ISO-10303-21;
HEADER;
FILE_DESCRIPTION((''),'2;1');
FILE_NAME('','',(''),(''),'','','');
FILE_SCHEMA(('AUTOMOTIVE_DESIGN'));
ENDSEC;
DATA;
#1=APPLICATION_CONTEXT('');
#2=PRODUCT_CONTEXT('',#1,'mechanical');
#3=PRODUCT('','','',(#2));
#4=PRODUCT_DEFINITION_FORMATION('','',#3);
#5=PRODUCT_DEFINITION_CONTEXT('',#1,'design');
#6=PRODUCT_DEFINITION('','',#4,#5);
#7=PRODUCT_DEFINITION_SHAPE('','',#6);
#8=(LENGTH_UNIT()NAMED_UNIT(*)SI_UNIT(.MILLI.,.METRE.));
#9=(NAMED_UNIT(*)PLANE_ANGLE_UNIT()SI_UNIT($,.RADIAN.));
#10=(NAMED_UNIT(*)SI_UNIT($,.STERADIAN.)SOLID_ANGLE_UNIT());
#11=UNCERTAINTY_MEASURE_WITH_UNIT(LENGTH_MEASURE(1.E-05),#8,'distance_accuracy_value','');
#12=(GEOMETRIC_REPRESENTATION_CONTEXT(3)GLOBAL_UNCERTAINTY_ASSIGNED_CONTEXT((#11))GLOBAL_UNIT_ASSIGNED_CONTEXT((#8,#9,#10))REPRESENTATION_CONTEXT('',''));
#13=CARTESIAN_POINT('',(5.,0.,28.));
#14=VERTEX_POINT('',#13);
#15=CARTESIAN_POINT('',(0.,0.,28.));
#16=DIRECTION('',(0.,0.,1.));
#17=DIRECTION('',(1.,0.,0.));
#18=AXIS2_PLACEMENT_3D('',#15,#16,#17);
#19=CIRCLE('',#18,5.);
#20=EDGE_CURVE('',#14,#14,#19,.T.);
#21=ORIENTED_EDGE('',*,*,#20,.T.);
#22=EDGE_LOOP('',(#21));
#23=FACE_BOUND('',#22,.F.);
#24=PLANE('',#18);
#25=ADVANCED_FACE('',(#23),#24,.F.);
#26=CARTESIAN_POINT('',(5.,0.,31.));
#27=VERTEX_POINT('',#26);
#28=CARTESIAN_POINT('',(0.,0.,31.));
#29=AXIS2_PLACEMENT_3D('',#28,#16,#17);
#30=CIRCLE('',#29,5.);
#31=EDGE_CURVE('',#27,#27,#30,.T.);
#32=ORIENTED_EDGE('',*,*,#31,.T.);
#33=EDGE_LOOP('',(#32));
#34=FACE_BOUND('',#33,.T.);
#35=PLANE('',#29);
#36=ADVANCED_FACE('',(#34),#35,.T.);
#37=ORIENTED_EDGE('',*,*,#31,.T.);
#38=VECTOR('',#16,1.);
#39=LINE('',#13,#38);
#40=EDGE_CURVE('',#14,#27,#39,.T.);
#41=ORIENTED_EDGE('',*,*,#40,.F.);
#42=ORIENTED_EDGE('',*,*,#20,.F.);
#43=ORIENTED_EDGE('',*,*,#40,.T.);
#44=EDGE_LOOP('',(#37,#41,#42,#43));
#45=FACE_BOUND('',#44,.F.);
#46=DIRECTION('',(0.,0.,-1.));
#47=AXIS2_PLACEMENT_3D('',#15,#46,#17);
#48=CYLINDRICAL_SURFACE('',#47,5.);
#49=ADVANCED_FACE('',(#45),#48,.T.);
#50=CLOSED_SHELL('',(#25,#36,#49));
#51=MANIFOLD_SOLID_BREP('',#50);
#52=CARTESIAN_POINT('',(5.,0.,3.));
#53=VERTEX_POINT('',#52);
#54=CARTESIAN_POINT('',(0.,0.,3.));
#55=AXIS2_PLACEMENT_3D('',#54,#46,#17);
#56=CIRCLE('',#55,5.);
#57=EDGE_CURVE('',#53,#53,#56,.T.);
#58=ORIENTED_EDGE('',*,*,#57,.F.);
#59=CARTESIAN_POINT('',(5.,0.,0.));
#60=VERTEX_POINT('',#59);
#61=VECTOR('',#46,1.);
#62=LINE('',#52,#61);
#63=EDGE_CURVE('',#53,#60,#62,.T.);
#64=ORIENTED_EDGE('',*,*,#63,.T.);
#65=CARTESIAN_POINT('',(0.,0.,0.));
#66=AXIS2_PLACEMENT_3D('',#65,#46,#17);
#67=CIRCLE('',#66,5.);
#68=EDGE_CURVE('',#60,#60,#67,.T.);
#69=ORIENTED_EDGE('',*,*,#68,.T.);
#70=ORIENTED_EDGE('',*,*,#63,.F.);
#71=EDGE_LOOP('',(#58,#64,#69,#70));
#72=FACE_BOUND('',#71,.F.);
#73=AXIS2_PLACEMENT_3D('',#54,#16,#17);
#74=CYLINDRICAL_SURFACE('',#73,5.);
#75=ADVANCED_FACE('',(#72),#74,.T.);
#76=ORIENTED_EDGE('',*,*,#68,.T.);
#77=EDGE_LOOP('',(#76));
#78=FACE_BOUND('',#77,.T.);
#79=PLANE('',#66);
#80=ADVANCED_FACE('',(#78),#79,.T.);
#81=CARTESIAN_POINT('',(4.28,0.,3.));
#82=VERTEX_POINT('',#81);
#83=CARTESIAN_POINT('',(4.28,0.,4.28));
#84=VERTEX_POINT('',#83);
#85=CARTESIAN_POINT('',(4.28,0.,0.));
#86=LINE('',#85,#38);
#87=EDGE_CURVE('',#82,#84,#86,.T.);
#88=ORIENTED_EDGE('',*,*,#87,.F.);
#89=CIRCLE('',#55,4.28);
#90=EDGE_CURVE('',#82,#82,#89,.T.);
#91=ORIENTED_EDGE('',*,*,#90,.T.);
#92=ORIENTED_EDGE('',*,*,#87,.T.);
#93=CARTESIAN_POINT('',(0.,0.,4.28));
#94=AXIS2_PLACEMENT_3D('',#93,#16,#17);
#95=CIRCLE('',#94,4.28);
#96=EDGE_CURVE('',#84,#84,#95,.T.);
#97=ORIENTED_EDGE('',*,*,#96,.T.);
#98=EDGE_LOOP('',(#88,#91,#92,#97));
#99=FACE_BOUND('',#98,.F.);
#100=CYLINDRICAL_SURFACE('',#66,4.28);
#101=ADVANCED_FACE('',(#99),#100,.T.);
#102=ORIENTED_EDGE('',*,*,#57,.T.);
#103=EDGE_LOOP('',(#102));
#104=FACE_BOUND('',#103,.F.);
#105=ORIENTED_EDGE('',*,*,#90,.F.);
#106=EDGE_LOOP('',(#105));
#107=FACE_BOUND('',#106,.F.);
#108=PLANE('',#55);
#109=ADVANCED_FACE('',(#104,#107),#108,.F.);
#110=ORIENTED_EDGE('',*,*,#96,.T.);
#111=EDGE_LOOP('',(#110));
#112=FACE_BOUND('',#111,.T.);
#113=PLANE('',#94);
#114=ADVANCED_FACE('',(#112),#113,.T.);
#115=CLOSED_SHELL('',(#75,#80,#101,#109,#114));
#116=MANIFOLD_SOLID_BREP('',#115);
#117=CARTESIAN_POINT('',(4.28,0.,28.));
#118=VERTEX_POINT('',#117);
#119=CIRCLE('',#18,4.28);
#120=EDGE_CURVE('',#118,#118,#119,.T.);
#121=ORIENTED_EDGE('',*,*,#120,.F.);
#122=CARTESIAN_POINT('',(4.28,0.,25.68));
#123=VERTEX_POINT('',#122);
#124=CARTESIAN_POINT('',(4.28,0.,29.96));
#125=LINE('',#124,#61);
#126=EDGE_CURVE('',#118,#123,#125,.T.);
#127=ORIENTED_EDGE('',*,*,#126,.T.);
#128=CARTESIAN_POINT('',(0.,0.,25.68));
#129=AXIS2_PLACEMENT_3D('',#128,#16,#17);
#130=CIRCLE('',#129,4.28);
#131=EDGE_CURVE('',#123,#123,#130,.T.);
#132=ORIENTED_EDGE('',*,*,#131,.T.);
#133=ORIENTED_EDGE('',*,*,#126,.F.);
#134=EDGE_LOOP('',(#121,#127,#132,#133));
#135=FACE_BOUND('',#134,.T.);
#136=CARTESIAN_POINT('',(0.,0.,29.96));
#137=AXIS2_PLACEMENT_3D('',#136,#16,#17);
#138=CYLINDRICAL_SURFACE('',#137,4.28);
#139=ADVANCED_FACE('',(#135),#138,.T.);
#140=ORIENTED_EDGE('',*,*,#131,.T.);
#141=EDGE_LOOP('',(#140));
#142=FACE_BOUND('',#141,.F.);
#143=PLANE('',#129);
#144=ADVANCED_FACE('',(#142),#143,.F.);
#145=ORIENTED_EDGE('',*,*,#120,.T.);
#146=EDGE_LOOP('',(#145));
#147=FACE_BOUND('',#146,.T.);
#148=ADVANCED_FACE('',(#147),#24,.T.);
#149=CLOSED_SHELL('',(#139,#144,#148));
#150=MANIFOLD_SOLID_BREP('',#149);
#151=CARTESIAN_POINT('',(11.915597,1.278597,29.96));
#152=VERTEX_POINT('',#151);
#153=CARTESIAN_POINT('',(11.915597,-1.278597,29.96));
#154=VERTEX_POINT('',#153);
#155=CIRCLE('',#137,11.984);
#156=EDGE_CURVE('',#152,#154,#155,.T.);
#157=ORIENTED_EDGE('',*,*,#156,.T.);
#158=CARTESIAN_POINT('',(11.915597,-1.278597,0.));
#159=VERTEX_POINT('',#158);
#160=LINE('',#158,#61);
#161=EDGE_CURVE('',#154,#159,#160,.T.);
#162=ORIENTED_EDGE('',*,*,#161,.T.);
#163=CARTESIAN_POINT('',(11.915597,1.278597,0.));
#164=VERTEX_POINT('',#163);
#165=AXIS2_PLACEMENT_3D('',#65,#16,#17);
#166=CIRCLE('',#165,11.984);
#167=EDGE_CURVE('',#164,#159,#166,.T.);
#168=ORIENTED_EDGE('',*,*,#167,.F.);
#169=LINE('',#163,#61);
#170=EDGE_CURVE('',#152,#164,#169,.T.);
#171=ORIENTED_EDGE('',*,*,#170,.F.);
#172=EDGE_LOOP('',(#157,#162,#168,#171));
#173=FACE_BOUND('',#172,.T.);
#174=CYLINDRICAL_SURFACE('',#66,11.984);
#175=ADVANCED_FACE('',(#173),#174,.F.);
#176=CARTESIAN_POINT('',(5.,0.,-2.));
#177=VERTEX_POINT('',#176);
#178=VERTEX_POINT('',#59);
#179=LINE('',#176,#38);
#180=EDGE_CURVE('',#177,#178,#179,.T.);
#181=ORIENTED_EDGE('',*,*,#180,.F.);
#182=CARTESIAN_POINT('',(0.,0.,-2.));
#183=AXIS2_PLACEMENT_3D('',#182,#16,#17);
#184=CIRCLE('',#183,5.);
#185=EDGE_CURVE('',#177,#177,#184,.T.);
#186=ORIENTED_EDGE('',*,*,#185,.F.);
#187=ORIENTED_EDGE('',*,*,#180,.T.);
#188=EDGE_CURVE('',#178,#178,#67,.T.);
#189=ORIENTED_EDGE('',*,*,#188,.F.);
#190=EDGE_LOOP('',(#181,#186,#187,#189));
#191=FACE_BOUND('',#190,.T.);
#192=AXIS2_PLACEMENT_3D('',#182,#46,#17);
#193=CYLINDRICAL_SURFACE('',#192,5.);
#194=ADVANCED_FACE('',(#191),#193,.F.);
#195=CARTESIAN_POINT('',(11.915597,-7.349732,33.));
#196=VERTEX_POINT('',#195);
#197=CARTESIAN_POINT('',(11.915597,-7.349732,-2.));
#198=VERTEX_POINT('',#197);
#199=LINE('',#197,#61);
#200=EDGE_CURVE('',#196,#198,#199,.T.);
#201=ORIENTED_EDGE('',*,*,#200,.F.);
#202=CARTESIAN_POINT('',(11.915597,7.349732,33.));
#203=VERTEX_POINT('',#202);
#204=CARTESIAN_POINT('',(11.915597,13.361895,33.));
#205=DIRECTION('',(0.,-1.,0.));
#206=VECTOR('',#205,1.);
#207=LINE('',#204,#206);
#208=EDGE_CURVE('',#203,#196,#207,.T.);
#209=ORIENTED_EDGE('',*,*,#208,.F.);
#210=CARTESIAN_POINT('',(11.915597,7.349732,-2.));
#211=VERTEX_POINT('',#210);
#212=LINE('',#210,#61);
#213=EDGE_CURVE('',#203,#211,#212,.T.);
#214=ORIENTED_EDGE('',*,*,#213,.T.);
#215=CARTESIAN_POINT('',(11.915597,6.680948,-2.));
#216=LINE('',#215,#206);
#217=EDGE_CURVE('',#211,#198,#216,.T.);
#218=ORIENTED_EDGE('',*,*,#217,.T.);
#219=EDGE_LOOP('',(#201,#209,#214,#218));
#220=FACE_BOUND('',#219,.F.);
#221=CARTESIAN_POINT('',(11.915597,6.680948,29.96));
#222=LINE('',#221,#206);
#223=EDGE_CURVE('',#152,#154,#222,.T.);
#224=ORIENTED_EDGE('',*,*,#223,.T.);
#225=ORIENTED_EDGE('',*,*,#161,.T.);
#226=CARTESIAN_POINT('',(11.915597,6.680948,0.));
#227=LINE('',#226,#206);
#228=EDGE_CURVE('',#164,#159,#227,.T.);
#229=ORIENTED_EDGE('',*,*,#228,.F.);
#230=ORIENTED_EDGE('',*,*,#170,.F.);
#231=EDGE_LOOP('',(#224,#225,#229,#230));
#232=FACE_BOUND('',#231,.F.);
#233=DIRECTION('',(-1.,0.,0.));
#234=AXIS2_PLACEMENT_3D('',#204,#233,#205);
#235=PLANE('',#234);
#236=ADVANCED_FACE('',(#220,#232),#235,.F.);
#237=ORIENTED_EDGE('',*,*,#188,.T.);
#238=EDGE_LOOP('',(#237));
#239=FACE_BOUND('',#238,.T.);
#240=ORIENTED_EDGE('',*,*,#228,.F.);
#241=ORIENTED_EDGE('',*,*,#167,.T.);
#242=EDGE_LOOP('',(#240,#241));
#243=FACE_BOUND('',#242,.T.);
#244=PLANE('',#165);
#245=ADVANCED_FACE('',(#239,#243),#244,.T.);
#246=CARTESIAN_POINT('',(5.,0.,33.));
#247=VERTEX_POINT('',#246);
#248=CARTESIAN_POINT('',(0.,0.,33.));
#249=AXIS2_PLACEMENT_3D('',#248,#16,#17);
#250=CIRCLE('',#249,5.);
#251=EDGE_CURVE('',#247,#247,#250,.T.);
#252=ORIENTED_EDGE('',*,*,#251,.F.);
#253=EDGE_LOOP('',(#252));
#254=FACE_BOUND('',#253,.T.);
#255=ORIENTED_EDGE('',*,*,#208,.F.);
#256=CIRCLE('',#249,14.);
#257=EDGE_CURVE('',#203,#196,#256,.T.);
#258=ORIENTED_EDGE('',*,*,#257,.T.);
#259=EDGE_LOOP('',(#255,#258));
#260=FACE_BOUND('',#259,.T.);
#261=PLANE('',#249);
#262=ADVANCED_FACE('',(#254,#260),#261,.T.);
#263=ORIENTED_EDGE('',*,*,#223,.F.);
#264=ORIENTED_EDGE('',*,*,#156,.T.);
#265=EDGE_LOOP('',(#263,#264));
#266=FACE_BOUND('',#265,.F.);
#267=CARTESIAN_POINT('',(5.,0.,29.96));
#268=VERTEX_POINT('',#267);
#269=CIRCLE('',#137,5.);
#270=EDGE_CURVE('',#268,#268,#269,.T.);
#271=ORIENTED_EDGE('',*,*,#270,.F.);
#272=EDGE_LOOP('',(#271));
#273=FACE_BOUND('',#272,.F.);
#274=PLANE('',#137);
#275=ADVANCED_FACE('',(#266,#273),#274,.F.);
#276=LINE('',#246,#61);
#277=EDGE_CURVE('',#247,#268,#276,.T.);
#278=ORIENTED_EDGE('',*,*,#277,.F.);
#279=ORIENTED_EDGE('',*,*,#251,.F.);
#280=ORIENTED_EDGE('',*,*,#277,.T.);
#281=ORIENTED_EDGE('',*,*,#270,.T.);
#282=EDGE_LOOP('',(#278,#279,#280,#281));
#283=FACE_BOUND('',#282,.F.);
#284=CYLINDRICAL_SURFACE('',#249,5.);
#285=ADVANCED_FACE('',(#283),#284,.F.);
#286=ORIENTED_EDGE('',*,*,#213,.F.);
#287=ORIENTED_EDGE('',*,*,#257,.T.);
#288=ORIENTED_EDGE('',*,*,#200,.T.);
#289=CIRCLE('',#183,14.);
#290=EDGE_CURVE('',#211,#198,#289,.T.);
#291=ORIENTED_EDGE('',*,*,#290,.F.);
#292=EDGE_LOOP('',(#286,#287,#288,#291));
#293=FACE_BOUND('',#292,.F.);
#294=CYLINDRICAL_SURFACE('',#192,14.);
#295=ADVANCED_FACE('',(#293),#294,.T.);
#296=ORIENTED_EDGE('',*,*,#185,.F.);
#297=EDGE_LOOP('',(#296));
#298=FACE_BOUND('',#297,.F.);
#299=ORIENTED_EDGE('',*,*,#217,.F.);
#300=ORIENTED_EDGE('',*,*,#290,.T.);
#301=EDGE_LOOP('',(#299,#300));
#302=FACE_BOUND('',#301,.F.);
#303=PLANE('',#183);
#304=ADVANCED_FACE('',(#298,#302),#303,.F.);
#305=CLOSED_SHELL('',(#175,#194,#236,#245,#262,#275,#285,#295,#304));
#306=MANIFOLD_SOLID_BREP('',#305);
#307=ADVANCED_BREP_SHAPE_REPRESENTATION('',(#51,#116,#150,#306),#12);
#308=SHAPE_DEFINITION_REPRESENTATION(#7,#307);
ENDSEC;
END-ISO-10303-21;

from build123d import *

# Parameters (mm, degrees)
F0_R      = 14
F2_DEPTH  = 35
F3_R      = 5
F4_DEPTH  = 5
F1_R      = 5
F5_DEPTH  = 5
F7_SCALE  = 0.856
F10_R     = 5
F10_R_2   = 4.28
F11_DEPTH = 3
F12_R     = 5
F12_R_2   = 4.28
F13_DEPTH = 3
F15_DEPTH = 41.7


with BuildPart() as f2:
    # F0 (on Top) → F2 (new body)
    with BuildSketch(Plane.XY):
        Circle(F0_R)
    extrude(amount=F2_DEPTH)

    # F3 (on face) → F4 (cut)
    with BuildSketch(Plane.XY.offset(35)):
        Circle(F3_R)
    extrude(amount=-F4_DEPTH, mode=Mode.SUBTRACT)

    # F1 (on Top) → F5 (cut)
    with BuildSketch(Plane.XY):
        Circle(F1_R)
    extrude(amount=F5_DEPTH, mode=Mode.SUBTRACT)


with BuildPart() as f6_1:
    # F6: copy of F2
    add(f2.part.moved(Location((0, 0, -2))))


with BuildPart() as f7_1:
    # F7: copy of F2
    add(f2.part.scale(F7_SCALE))


with BuildPart() as f6_1_1:
    add(f6_1.part)

    # F9: cut F7_1
    add(f7_1.part, mode=Mode.SUBTRACT)

    # F12 (on face) → F13 (join)
    with BuildSketch(Plane(origin=(0, 0, 3), x_dir=(1, 0, 0), z_dir=(0, 0, -1))):
        Circle(F12_R)
        Circle(F12_R_2, mode=Mode.SUBTRACT)
        Circle(F12_R_2)
    extrude(amount=F13_DEPTH)

    # F14 (on face) → F15 (cut)
    with BuildSketch(Plane.XY.offset(33)):
        with BuildLine():
            Line((11.9155967814, -7.349731515), (11.9155967814, -11.6381047294))
            Line((11.9155967814, -11.6381047294), (22.9155967814, -11.6381047294))
            Line((22.9155967814, -11.6381047294), (22.9155967814, 13.3618952706))
            Line((22.9155967814, 13.3618952706), (11.9155967814, 13.3618952706))
            Line((11.9155967814, 13.3618952706), (11.9155967814, 7.349731515))
            ThreePointArc((11.9155967814, 7.349731515), (13.4688224233, 3.8197935193), (14, 0))
            ThreePointArc((14, 0), (13.4688224233, -3.8197935193), (11.9155967814, -7.349731515))
        make_face()
        with BuildLine():
            Line((11.9155967814, 7.349731515), (11.9155967814, -7.349731515))
            ThreePointArc((11.9155967814, -7.349731515), (13.4688224233, -3.8197935193), (14, 0))
            ThreePointArc((14, 0), (13.4688224233, 3.8197935193), (11.9155967814, 7.349731515))
        make_face()
    extrude(amount=-F15_DEPTH, mode=Mode.SUBTRACT)


with BuildPart() as f11:
    # F10 (on face) → F11 (new body)
    with BuildSketch(Plane.XY.offset(28)):
        Circle(F10_R)
        Circle(F10_R_2, mode=Mode.SUBTRACT)
        Circle(F10_R_2)
    extrude(amount=F11_DEPTH)


solid = Compound([f6_1_1.part, f11.part])
